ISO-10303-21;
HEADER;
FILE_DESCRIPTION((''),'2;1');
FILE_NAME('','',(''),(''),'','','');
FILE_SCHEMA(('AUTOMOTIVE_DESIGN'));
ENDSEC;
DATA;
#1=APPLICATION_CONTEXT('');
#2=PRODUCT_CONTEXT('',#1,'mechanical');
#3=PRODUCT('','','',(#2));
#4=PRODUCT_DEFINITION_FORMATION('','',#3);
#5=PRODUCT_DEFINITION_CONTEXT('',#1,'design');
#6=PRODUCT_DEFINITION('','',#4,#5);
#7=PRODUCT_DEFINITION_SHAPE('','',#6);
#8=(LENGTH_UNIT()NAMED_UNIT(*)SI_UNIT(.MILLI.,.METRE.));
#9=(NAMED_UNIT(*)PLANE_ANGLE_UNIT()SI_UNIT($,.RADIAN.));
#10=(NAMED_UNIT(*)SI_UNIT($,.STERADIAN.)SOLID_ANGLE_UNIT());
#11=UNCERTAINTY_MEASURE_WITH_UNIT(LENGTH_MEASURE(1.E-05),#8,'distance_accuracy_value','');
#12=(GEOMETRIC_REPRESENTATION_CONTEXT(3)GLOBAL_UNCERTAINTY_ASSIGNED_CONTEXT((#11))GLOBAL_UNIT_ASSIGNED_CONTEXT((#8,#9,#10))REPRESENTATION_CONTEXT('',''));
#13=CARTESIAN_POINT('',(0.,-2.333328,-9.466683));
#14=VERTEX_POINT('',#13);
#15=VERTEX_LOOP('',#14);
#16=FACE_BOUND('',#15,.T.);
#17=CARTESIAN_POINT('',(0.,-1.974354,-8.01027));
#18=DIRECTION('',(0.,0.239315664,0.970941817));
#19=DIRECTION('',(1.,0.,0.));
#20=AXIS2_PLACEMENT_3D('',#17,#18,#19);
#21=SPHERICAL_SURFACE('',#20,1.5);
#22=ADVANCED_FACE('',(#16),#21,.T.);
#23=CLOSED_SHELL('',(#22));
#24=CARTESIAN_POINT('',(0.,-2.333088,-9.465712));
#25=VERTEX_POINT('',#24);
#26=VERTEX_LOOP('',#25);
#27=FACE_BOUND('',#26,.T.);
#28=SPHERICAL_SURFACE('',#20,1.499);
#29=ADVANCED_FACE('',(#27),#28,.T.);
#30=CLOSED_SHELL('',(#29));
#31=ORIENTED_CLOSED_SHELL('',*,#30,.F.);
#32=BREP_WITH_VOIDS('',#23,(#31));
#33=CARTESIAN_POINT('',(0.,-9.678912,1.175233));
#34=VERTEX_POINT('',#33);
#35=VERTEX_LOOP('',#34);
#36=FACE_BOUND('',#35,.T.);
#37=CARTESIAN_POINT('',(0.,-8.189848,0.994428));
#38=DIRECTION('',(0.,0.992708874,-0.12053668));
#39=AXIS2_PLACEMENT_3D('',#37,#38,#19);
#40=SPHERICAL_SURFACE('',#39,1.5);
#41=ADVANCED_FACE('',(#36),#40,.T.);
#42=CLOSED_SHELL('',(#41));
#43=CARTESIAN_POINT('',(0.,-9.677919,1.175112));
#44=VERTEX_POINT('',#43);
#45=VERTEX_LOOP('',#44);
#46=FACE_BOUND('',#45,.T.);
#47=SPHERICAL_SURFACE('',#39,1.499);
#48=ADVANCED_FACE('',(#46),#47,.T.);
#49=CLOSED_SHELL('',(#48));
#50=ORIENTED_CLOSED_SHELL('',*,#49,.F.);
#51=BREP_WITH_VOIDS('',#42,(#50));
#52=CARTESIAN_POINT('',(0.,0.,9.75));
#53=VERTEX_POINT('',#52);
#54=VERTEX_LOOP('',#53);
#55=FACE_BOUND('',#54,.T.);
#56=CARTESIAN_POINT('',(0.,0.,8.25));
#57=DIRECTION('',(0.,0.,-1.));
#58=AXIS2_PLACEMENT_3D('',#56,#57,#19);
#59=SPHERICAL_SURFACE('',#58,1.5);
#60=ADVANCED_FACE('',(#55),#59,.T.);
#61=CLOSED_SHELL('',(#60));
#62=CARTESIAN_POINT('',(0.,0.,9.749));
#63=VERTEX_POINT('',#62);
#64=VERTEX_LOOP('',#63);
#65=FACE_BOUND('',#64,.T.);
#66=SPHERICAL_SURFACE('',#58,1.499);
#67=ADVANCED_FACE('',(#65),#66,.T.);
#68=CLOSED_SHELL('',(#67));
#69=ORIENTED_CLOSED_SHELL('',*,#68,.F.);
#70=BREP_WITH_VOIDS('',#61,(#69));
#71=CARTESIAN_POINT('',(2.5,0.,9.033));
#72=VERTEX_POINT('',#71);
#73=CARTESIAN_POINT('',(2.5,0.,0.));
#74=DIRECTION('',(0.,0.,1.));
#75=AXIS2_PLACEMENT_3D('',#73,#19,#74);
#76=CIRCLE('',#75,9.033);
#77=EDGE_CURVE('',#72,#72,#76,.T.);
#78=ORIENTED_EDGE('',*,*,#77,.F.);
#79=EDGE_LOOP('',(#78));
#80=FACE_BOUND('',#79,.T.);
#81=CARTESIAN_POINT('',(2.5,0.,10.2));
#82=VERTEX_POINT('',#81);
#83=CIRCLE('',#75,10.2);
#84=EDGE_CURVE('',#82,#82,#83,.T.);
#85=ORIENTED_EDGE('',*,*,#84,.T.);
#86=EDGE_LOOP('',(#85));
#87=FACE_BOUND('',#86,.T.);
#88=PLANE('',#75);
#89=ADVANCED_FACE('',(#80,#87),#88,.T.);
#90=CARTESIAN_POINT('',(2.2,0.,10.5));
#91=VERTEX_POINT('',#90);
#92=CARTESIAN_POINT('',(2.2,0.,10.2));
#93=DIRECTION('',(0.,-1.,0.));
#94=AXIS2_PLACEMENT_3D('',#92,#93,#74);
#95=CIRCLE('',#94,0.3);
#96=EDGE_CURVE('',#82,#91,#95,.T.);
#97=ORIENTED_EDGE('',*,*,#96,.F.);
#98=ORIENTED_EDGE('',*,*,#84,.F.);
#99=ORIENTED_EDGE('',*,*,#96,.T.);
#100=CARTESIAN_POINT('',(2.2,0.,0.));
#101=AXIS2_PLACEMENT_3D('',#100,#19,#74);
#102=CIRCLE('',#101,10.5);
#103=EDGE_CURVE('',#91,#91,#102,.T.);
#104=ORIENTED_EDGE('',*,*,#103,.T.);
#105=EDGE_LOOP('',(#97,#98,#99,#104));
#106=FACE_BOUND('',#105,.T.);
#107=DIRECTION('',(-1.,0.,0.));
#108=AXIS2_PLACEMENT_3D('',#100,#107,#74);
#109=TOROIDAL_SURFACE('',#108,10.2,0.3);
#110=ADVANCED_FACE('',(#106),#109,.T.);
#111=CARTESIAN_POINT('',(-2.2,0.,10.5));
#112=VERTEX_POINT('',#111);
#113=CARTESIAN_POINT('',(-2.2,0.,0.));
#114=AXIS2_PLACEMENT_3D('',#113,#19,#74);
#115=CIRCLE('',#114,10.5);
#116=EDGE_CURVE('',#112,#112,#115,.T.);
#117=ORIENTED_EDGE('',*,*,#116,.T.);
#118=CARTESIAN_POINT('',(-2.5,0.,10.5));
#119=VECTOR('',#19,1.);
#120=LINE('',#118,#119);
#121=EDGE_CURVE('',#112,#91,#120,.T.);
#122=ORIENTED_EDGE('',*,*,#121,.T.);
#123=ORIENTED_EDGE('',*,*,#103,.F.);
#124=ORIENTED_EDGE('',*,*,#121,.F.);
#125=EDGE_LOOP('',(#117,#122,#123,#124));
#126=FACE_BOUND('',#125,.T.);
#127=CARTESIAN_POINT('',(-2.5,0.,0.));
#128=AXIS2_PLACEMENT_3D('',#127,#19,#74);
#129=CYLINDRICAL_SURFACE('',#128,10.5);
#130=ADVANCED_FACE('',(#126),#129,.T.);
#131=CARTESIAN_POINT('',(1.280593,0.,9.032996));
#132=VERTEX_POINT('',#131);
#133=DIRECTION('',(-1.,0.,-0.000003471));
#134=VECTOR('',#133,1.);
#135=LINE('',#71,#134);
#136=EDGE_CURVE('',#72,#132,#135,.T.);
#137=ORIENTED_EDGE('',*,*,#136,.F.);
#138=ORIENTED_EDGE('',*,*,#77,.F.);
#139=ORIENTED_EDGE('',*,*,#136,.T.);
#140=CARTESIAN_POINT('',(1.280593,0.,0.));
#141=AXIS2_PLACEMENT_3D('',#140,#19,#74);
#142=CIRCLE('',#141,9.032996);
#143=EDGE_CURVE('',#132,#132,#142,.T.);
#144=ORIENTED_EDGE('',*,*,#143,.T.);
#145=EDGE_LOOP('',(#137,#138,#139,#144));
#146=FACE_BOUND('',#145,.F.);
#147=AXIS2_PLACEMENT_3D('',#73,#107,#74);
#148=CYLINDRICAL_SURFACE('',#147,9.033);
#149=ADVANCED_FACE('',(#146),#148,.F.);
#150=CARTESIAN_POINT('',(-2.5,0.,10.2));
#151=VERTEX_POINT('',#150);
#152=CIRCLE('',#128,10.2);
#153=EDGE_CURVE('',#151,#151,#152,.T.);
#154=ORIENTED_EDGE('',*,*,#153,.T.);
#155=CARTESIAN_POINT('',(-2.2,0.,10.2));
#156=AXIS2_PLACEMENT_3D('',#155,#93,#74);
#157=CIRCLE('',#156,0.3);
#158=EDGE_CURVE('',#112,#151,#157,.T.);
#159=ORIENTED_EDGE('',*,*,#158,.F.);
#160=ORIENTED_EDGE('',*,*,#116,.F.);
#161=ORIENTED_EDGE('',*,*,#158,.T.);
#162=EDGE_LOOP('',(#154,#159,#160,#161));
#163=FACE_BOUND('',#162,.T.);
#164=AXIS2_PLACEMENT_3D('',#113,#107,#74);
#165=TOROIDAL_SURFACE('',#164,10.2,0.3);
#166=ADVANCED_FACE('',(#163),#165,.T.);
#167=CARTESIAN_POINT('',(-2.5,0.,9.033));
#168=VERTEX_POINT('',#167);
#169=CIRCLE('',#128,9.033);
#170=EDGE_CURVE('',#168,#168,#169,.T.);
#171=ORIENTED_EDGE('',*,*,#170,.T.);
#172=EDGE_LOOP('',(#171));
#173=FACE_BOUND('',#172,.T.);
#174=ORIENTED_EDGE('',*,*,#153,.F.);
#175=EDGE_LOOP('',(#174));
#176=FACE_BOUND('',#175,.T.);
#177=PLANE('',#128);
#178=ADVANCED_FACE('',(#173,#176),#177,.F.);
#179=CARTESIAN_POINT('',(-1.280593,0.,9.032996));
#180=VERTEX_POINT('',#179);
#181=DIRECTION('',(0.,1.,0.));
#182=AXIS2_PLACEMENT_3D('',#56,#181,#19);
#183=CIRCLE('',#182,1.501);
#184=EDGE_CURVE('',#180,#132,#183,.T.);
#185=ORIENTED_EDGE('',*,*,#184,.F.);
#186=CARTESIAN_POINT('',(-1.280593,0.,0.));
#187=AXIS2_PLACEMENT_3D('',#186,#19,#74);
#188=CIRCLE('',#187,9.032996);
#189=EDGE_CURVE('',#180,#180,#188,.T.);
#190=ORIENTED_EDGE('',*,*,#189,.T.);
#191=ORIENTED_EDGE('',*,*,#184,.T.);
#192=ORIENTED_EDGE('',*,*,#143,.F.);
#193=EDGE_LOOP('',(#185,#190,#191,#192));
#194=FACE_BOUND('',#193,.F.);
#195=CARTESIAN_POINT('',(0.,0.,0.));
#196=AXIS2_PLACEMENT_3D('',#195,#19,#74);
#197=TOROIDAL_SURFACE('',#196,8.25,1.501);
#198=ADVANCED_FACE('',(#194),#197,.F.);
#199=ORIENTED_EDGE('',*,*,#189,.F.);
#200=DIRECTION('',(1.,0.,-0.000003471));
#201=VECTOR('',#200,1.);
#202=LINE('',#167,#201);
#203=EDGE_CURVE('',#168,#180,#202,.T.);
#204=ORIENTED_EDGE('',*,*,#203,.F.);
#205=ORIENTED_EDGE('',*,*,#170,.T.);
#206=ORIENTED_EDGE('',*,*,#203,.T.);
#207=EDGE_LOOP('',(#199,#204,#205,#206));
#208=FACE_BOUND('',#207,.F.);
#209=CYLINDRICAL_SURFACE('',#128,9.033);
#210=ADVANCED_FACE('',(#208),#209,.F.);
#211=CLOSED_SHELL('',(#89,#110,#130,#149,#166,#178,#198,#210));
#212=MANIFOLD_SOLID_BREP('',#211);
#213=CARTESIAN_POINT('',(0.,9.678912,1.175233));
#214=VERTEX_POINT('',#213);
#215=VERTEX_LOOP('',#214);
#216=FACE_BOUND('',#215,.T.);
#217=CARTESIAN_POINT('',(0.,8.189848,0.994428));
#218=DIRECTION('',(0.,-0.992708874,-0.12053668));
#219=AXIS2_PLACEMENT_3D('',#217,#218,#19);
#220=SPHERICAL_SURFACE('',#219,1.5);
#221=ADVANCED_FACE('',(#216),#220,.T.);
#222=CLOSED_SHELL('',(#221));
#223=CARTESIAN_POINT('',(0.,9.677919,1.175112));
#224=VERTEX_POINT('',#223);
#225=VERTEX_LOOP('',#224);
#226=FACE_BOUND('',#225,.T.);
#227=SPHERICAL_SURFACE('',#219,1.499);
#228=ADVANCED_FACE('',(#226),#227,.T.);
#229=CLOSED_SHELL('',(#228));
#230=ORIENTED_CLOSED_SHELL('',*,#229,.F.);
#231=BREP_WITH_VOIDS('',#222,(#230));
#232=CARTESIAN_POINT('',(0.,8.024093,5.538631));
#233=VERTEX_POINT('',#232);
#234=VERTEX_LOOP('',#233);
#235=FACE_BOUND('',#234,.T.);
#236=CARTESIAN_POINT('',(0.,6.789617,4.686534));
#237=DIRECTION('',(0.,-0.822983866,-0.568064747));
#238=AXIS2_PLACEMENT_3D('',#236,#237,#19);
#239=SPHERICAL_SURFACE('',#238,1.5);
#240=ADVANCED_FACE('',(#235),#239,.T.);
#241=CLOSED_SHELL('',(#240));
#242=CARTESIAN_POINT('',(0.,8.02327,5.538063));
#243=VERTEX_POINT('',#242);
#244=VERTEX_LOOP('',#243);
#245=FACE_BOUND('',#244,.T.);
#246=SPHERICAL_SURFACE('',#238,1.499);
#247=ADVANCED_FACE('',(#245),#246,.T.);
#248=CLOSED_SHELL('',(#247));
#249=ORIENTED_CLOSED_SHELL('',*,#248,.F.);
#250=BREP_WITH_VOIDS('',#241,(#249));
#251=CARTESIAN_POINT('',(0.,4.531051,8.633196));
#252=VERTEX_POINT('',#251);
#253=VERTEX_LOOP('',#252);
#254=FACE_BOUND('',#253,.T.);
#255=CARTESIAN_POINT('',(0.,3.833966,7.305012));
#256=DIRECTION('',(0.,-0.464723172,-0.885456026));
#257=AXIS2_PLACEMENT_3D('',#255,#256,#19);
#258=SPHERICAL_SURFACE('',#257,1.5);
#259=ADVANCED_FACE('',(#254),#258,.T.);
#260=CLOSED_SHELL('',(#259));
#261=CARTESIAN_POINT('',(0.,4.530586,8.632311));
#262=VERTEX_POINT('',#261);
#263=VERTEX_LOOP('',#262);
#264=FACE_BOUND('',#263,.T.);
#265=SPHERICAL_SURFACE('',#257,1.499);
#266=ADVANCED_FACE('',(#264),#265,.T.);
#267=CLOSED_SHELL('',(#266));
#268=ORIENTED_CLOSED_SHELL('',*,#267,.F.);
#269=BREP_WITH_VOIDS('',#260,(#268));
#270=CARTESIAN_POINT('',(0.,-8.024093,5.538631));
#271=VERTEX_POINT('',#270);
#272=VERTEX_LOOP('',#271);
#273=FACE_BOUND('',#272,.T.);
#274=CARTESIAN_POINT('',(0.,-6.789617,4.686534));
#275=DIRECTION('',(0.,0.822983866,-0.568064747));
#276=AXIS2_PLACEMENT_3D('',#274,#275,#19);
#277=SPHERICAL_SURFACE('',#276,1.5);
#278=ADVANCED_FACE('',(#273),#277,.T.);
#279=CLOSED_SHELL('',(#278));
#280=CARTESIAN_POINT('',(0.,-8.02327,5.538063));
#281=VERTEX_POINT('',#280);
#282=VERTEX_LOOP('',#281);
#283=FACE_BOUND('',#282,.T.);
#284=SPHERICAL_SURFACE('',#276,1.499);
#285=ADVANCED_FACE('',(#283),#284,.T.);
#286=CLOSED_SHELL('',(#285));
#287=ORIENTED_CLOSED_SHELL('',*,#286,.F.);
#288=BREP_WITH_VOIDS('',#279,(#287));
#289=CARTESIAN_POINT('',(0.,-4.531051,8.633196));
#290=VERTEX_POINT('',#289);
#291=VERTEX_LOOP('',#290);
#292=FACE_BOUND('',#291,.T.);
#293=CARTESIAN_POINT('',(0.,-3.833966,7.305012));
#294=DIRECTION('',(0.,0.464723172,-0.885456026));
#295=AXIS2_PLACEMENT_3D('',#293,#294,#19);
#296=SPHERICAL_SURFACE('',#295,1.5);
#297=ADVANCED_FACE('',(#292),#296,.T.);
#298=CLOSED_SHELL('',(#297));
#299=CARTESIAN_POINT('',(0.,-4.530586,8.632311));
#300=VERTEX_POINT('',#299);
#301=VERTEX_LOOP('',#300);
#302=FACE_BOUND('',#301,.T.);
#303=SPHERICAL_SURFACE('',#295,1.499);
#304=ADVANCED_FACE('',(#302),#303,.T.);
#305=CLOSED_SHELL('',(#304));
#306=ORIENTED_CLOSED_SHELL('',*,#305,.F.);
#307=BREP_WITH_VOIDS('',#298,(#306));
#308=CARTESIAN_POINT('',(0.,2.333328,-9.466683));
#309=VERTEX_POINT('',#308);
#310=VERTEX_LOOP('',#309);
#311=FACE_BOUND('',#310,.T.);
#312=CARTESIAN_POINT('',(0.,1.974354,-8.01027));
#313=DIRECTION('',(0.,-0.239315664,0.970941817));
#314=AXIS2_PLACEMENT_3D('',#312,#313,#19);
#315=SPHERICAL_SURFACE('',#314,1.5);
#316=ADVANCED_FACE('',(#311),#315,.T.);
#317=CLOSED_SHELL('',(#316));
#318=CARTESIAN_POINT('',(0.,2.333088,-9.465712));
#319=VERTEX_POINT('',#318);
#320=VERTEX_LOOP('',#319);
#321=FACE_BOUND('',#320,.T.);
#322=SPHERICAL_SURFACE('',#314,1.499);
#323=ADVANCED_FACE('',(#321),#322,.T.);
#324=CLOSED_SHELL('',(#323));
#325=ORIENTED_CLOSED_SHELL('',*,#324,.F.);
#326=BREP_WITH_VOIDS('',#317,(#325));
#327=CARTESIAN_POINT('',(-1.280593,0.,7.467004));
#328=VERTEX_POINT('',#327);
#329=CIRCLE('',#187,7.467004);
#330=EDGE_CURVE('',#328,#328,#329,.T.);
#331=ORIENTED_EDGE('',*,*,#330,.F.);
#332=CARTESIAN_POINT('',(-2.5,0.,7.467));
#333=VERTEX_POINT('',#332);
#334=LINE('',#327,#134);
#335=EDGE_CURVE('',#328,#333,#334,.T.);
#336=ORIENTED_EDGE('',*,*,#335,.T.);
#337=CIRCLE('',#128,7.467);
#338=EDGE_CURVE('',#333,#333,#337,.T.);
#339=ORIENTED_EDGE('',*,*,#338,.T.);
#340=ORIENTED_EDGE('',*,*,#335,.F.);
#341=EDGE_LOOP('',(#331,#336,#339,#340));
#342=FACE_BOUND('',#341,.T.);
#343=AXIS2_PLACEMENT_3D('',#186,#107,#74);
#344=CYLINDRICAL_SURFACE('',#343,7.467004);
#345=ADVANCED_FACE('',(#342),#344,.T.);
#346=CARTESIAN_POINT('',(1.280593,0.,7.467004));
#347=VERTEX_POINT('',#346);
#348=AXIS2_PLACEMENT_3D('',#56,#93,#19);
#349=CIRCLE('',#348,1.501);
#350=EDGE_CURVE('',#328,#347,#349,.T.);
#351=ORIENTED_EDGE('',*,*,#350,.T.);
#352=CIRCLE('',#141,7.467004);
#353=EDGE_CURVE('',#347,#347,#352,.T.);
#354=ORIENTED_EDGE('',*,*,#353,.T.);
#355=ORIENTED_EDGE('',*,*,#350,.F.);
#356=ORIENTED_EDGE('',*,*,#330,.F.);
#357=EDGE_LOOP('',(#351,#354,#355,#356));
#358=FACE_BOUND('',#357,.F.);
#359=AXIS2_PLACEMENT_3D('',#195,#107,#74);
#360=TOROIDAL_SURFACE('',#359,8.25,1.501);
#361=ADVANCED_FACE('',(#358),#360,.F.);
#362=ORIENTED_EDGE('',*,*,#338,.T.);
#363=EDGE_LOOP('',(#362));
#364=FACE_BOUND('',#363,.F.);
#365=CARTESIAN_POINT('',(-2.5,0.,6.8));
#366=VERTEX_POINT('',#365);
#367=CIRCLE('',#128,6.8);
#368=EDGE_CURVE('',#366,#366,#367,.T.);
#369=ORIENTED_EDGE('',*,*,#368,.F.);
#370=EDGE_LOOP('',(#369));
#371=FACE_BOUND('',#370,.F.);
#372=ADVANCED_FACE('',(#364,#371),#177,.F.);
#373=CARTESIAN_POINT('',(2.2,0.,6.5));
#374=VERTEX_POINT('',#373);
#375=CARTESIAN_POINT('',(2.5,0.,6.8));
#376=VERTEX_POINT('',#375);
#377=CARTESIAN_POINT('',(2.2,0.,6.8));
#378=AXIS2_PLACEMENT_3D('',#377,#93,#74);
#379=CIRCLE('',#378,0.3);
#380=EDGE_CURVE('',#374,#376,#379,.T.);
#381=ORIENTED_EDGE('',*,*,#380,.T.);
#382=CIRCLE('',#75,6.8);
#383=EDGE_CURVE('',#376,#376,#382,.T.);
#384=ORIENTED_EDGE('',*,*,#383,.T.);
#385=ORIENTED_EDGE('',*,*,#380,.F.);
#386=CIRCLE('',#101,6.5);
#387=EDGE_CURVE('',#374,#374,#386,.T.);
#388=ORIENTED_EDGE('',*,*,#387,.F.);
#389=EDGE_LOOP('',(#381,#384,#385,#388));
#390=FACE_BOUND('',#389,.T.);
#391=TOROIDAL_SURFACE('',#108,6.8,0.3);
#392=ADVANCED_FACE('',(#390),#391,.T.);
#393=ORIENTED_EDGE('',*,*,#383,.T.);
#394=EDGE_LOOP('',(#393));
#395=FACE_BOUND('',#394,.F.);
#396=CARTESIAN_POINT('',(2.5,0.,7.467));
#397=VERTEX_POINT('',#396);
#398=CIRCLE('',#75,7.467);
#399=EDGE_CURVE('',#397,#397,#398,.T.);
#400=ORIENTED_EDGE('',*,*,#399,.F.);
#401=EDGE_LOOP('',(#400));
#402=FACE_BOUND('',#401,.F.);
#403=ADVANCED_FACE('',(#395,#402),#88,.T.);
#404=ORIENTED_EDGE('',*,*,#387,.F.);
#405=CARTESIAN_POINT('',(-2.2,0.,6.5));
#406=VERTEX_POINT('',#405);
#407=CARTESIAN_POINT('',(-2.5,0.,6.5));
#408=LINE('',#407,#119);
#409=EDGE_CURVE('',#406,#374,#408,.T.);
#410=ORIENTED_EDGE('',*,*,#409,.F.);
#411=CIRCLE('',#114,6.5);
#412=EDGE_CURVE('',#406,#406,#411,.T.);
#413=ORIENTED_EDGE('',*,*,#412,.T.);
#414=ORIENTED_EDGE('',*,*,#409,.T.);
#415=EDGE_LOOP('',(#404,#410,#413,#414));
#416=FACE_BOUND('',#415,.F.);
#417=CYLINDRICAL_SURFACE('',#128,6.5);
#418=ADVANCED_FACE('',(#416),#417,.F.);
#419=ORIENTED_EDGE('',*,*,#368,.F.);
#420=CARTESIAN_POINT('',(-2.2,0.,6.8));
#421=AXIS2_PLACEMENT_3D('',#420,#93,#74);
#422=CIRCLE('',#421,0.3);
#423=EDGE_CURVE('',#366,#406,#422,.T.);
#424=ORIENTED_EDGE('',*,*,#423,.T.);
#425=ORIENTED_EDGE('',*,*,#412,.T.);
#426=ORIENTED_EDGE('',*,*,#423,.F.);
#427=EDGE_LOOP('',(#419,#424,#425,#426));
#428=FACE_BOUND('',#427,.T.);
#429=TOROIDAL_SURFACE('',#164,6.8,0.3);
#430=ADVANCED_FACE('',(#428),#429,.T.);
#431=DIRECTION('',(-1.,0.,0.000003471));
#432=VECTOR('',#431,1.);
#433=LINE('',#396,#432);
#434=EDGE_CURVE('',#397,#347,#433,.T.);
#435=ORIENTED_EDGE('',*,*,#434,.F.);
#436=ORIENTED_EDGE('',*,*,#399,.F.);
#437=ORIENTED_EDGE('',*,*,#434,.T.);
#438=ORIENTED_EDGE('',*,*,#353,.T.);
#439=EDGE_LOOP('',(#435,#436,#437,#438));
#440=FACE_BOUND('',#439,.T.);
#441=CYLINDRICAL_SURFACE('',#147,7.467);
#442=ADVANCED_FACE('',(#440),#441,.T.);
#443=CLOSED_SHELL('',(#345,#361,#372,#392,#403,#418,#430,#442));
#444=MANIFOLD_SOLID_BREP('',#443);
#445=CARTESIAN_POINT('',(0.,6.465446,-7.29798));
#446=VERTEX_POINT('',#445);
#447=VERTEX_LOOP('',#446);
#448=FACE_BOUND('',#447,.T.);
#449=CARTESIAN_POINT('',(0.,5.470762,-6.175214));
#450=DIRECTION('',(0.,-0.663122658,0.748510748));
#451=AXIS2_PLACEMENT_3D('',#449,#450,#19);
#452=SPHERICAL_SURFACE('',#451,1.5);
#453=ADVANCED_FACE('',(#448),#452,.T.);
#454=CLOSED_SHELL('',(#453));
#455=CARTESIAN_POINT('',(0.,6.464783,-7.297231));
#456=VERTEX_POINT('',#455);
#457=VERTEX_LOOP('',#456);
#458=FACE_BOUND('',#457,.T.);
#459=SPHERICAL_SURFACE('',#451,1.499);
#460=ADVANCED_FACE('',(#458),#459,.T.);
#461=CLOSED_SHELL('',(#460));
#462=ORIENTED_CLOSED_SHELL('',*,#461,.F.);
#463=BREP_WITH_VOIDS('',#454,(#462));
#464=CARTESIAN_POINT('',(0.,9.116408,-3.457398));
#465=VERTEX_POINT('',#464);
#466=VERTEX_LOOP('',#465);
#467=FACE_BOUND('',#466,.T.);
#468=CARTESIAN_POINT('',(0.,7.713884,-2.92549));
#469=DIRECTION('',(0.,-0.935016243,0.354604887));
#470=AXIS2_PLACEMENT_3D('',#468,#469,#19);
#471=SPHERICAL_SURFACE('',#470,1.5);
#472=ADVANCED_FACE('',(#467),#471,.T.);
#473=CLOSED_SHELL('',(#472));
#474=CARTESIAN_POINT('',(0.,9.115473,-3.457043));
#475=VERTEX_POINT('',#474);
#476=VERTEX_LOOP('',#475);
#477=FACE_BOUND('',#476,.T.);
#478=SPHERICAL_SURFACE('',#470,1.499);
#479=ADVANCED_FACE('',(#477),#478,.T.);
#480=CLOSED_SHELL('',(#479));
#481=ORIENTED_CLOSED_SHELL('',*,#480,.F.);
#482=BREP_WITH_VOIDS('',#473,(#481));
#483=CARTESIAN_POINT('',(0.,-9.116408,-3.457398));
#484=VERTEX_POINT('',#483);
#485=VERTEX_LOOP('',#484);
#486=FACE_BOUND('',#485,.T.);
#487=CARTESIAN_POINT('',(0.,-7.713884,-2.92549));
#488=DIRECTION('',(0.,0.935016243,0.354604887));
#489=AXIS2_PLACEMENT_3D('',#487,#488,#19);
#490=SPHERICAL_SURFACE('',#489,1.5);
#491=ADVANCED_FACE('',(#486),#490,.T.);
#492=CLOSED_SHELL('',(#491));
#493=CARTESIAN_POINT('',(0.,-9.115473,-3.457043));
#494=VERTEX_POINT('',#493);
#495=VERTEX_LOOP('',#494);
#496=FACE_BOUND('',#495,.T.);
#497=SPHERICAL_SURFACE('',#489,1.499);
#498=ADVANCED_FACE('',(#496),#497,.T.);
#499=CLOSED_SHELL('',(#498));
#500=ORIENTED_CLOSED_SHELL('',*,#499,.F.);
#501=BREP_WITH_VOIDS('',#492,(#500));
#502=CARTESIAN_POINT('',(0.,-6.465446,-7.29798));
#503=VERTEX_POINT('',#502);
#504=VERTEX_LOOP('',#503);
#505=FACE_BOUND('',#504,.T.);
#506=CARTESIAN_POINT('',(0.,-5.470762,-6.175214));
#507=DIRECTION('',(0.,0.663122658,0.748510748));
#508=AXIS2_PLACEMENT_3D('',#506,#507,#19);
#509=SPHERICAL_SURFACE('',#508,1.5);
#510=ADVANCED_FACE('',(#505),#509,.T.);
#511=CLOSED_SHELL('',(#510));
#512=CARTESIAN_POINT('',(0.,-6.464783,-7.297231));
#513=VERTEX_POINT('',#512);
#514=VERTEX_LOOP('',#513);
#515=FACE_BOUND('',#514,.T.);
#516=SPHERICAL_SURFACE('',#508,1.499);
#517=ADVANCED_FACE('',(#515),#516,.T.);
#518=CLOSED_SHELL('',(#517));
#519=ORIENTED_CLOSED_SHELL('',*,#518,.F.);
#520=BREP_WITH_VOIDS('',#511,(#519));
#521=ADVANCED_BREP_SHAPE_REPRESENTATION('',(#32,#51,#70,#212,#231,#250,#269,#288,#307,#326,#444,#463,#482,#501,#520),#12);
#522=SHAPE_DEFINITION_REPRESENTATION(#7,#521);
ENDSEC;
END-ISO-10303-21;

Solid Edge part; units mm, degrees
sketch "Sketch1" plane through (0, 0, 0) normal (0, -1, 0) x (1, 0, 0)
  arc A0 (0, 9.75) -> (0, 6.75) centre (0, 8.25) cw
  dimension "D1" = 1.5
revolve "RevolvedProtrusion1" add sketch "Sketch1" angle 360 about axis through (0, 0, 30.6346) along (0, 0, 1)
shell "Thinwall1" thickness 0.001 removed faces 0
pattern_circular "Pattern1" count 13 over 360 about axis through (0, 0, 0) along (1, 0, 0) of "RevolvedProtrusion1", "Thinwall1"
sketch "Sketch2" plane through (0, 0, 0) normal (0, -1, 0) x (1, 0, 0)
  line L0 (-2.5, 7.467) -> (-2.5, 6.5)
  line L1 (-2.5, 6.5) -> (2.5, 6.5)
  line L2 (2.5, 6.5) -> (2.5, 7.467)
  line L3 (2.5, 7.467) -> (1.2806, 7.467)
  arc A0 (-1.2806, 7.467) -> (1.2806, 7.467) centre (0, 8.25) ccw
  line L4 (-1.2806, 7.467) -> (-2.5, 7.467)
  line L5 (-2.5, 9.033) -> (-1.2806, 9.033)
  arc A1 (-1.2806, 9.033) -> (1.2806, 9.033) centre (0, 8.25) cw
  line L6 (2.5, 9.033) -> (1.2806, 9.033)
  line L7 (2.5, 10.5) -> (2.5, 9.033)
  line L8 (-2.5, 10.5) -> (2.5, 10.5)
  line L9 (-2.5, 9.033) -> (-2.5, 10.5)
  dimension "D1" = 5
  dimension "D2" = 1.501
  dimension "D3" = 1.501
revolve "RevolvedProtrusion2" add sketch "Sketch2" angle 360 about axis through (-60, 0, 0) along (1, 0, 0)
fillet "Round1" radius 0.3 4 edges at (-2.5, 0, -10.5) (2.5, 0, -10.5) (2.5, 0, -6.5) (-2.5, 0, -6.5)
properties material "Stahl"
